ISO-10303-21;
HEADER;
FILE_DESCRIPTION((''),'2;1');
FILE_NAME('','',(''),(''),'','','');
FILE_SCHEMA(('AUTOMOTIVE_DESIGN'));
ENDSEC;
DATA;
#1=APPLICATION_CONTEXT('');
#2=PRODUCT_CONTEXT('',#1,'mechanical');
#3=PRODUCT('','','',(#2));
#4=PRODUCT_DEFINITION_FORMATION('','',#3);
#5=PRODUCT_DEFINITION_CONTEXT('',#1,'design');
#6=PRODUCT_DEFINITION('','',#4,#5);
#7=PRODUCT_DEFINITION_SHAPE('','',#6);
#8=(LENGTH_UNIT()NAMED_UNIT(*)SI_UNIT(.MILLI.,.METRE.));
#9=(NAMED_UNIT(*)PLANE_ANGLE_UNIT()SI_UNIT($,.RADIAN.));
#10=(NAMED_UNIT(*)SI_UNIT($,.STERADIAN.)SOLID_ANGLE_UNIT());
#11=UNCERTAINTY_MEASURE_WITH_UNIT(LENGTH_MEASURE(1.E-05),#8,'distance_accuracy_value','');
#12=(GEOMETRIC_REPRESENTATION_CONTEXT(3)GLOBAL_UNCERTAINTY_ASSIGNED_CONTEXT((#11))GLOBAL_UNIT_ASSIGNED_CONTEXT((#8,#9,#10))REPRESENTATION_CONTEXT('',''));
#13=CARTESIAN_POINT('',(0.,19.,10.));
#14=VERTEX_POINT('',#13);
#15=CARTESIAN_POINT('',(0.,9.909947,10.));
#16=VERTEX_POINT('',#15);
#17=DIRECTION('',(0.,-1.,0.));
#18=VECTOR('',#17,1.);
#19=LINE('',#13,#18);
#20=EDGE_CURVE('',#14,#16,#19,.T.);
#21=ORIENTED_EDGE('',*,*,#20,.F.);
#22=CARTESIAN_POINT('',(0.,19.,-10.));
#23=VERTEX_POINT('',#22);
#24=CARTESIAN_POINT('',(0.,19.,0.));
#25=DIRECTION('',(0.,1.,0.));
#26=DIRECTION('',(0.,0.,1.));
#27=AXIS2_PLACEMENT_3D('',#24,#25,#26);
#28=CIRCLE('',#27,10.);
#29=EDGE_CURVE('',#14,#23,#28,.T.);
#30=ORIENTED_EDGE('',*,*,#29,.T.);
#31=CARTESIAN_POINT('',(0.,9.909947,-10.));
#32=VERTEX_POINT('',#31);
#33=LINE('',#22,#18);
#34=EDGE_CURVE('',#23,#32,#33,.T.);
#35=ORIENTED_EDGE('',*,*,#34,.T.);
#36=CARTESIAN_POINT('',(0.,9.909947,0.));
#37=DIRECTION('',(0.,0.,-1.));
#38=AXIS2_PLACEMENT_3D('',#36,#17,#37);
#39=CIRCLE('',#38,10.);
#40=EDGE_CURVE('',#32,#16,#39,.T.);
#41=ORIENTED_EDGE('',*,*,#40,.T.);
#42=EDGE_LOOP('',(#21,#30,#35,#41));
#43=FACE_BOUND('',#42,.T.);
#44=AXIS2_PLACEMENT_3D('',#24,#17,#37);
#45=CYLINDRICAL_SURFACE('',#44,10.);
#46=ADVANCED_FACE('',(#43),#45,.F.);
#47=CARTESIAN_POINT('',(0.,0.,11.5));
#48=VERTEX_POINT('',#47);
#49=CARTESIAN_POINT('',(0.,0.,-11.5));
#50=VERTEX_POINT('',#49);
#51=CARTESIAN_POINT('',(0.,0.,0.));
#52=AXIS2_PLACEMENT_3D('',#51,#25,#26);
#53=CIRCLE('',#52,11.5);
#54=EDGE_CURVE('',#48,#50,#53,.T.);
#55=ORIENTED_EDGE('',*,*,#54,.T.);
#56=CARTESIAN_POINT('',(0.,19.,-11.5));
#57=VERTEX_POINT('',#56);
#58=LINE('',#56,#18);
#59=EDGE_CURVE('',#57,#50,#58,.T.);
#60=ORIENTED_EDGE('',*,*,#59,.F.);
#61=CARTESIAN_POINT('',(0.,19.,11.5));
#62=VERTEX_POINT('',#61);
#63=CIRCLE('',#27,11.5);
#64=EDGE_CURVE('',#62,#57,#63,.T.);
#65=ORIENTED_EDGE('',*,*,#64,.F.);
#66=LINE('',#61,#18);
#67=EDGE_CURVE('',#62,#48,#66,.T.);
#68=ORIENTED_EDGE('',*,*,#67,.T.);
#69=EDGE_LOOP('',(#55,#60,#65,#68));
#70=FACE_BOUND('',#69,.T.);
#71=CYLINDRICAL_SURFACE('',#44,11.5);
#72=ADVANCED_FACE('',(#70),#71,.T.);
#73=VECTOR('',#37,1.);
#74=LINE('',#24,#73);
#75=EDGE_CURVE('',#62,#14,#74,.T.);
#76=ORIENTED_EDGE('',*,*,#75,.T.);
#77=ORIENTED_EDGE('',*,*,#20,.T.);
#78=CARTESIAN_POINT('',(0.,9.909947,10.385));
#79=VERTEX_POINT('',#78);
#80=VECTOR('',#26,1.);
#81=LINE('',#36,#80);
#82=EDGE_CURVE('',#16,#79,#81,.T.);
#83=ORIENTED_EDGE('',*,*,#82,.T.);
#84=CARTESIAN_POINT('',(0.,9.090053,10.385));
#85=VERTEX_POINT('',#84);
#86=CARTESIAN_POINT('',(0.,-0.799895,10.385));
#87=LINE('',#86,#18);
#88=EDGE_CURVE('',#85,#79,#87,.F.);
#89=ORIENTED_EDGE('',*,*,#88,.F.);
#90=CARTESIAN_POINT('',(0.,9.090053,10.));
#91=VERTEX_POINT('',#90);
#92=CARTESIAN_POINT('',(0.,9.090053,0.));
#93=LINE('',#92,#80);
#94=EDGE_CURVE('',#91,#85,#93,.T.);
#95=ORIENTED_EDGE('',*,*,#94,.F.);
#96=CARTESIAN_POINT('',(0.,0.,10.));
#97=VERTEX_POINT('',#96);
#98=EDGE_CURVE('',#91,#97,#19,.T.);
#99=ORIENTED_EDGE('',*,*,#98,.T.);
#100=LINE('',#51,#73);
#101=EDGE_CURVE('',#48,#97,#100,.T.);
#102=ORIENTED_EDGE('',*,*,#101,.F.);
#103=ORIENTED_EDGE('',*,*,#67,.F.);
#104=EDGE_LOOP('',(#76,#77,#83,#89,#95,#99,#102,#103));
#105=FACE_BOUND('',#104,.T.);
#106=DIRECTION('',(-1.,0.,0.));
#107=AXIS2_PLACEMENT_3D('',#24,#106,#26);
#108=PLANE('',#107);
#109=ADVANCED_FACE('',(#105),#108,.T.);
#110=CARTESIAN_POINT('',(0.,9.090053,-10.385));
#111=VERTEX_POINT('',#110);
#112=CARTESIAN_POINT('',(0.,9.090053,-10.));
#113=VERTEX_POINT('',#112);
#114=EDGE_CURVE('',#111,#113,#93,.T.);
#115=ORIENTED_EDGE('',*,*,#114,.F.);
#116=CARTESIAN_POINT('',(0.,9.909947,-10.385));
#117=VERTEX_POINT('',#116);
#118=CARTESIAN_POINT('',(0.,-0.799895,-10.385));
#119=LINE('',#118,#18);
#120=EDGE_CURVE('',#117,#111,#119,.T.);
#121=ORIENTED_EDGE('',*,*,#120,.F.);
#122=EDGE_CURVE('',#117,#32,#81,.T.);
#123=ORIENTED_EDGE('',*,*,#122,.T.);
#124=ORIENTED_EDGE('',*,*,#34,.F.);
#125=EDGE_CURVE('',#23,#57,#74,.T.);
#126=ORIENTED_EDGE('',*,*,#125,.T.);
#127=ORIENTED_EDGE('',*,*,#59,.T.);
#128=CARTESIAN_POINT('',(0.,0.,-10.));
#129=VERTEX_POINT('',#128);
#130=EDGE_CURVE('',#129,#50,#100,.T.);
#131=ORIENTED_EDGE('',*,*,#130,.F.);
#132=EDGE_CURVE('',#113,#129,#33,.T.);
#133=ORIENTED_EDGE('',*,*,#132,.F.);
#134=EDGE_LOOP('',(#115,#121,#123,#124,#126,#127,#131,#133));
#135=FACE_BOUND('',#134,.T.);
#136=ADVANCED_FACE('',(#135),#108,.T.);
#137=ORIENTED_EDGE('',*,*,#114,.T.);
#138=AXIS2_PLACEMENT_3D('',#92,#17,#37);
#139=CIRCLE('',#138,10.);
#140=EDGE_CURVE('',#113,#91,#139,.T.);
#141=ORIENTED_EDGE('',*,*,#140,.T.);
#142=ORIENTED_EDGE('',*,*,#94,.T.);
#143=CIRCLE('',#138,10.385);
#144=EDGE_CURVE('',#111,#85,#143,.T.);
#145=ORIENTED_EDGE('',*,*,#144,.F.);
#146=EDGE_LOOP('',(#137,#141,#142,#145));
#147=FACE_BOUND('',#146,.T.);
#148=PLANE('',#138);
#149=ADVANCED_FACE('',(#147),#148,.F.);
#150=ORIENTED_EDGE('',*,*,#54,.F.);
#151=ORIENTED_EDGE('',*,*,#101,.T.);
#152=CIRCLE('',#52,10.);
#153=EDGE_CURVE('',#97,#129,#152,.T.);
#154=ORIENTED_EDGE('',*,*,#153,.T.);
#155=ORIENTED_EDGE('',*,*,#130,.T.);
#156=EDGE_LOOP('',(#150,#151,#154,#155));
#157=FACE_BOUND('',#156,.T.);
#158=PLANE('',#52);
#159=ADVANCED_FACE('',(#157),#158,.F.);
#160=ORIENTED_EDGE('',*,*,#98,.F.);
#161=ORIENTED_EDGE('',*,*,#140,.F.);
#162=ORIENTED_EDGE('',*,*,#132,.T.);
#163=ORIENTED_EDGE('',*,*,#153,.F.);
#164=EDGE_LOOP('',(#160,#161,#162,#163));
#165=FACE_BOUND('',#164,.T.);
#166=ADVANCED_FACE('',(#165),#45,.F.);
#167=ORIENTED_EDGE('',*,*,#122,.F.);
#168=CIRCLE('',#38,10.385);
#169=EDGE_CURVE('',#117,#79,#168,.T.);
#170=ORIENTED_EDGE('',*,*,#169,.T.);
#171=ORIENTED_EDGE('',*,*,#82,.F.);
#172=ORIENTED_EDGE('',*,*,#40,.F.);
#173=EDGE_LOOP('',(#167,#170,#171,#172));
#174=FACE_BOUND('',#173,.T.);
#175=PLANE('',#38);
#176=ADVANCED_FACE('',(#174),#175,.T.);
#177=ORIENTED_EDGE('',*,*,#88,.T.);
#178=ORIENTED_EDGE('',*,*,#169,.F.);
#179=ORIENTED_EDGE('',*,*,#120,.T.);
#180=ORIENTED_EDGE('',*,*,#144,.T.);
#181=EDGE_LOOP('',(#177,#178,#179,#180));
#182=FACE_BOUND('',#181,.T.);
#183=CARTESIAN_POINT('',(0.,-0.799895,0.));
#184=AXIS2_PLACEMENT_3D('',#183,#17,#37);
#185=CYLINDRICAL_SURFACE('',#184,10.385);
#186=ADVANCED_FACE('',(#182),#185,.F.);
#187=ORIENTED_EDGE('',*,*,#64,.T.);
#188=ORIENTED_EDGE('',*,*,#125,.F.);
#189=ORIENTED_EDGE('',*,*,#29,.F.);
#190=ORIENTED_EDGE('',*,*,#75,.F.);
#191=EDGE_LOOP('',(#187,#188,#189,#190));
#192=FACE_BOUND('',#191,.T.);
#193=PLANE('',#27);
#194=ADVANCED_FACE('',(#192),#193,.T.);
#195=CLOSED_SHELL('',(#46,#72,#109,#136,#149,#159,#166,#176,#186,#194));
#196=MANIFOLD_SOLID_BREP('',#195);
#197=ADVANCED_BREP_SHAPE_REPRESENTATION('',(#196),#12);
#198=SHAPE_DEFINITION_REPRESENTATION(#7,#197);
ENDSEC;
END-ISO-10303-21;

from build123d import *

# Parameters (mm, degrees)
BOSS_EXTRUDE1_DEPTH       = 19
CUT_REVOLVE_THIN4_START   = 9.090052714
CUT_REVOLVE_THIN4_DEPTH   = 0.819894572
CUT_REVOLVE_THIN4_START_2 = 9.100052714
CUT_REVOLVE_THIN4_2_DEPTH = 0.799894572


with BuildPart() as part:
    # Sketch1 → Boss-Extrude1 (new body)
    with BuildSketch(Plane(origin=(0, 0, 0), x_dir=(1, 0, 0), z_dir=(0, 1, 0))):
        with BuildLine():
            Line((0, -10), (0, -11.5))
            ThreePointArc((0, -11.5), (8.131727984, -8.131727984), (11.5, 0))
            ThreePointArc((11.5, 0), (8.131727984, 8.131727984), (0, 11.5))
            Line((0, 11.5), (0, 10))
            ThreePointArc((0, 10), (7.071067812, 7.071067812), (10, 0))
            ThreePointArc((10, 0), (7.071067812, -7.071067812), (0, -10))
        make_face()
    extrude(amount=BOSS_EXTRUDE1_DEPTH)

    # Cut-Revolve-Thin4: read off the stored shape, not the designer's step
    # Cut-Revolve-Thin4 outline → Cut-Revolve-Thin4 (cut)
    with BuildSketch(Plane(origin=(0, 0, 0), x_dir=(1, 0, 0), z_dir=(0, 1, 0)).offset(CUT_REVOLVE_THIN4_START)):
        with BuildLine():
            ThreePointArc((0, -10.385), (10.385, 0), (0, 10.385))
            Line((0, 10.385), (0, 10))
            ThreePointArc((0, 10), (10, 0), (0, -10))
            Line((0, -10), (0, -10.385))
        make_face()
    extrude(amount=CUT_REVOLVE_THIN4_DEPTH, mode=Mode.SUBTRACT)


with BuildPart() as body_2:
    # Cut-Revolve-Thin4 2 outline → Cut-Revolve-Thin4 2 (new body)
    with BuildSketch(Plane(origin=(0, 0, 0), x_dir=(1, 0, 0), z_dir=(0, 1, 0)).offset(CUT_REVOLVE_THIN4_START_2)):
        with BuildLine():
            Line((0, 10.375), (0, 10))
            ThreePointArc((0, 10), (10, 0), (0, -10))
            Line((0, -10), (0, -10.375))
            ThreePointArc((0, -10.375), (10.375, 0), (0, 10.375))
        make_face()
    extrude(amount=CUT_REVOLVE_THIN4_2_DEPTH)


solid = part.part
